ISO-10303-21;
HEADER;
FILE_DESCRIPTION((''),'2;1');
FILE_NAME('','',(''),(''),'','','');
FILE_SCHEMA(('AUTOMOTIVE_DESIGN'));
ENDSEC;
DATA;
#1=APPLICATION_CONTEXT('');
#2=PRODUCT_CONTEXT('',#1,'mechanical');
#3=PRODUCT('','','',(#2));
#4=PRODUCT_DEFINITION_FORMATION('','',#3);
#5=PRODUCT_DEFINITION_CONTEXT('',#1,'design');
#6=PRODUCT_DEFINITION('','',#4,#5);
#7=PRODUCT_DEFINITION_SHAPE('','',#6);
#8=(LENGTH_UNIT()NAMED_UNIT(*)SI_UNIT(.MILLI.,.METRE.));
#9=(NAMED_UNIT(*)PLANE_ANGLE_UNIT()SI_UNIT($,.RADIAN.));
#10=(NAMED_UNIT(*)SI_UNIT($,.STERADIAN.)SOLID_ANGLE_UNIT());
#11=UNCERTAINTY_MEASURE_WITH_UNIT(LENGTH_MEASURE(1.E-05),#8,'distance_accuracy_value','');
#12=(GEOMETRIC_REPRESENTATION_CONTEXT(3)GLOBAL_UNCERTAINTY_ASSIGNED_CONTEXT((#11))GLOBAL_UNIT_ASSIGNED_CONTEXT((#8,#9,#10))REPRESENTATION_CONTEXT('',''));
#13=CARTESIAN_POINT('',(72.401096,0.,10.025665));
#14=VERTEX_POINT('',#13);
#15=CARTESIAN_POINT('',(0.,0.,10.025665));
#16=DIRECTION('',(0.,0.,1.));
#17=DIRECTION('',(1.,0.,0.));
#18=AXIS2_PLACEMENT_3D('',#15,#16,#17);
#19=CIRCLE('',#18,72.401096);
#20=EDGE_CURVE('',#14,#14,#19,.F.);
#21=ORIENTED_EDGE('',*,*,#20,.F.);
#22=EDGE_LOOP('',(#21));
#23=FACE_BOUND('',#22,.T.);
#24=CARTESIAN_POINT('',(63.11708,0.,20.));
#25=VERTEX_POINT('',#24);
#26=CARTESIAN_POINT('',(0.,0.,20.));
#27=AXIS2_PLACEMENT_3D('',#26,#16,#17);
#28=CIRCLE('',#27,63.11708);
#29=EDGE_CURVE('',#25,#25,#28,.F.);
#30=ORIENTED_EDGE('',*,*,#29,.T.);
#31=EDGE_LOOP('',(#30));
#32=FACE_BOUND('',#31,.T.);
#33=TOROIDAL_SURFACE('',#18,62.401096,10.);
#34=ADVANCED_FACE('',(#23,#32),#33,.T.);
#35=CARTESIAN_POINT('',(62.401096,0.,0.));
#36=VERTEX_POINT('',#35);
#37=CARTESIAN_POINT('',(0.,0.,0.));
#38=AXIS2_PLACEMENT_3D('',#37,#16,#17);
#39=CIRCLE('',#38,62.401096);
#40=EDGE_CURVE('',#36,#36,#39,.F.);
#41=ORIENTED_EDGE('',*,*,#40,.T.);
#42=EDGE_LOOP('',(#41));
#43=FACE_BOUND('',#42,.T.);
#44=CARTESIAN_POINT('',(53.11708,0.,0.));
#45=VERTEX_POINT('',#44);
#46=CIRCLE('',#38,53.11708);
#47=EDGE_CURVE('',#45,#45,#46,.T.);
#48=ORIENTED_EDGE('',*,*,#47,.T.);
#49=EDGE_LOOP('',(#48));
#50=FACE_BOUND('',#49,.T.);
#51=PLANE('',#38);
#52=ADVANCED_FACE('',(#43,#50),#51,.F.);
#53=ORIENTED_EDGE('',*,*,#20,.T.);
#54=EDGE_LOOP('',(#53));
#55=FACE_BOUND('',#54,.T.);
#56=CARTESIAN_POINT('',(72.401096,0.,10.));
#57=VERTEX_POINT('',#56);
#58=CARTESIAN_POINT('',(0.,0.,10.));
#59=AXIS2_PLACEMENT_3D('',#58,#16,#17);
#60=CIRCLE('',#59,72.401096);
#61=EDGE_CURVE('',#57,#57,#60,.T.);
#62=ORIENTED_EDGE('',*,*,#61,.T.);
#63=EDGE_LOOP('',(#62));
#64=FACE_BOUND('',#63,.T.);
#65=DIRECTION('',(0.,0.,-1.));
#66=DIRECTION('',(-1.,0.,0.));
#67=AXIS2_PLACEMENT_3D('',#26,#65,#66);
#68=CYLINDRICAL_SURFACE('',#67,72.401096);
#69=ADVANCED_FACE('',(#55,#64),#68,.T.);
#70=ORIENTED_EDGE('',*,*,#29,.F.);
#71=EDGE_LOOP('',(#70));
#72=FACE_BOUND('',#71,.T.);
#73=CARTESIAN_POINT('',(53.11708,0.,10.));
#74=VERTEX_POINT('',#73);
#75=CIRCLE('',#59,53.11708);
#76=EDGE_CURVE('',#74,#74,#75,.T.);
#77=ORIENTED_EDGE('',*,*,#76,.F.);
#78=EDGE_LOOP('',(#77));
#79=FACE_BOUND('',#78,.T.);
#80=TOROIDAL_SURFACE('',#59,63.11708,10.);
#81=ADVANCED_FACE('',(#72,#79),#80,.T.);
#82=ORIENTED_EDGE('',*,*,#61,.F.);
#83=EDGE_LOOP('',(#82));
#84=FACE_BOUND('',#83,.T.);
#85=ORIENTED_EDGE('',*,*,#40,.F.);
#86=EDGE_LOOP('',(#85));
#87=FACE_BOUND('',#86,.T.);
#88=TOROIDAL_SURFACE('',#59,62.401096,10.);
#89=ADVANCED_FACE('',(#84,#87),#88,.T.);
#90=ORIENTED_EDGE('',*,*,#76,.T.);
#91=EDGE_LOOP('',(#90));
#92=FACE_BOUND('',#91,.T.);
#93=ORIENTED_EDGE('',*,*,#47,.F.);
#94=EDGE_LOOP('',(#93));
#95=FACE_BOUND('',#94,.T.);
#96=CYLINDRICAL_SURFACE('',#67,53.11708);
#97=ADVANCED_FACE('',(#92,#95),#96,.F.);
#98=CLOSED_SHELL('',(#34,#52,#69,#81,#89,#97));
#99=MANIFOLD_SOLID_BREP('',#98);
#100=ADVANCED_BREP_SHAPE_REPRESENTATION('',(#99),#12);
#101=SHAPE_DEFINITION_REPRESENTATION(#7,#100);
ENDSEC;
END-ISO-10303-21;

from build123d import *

# Parameters (mm, degrees)
SKETCH1_R           = 72.401096357
SKETCH1_R_2         = 53.117079775
BOSS_EXTRUDE1_DEPTH = 20
FILLET8_R           = 10
FILLET9_R           = 10
FILLET10_R          = 10


with BuildPart() as part:
    # Sketch1 → Boss-Extrude1 (new body)
    with BuildSketch(Plane.XY):
        Circle(SKETCH1_R)
        Circle(SKETCH1_R_2, mode=Mode.SUBTRACT)
    extrude(amount=BOSS_EXTRUDE1_DEPTH)

    # Fillet8
    fillet8_edges = [part.edges().sort_by_distance(p)[0] for p in [
        (-53.117079775, 0, 20),
    ]]
    fillet(fillet8_edges, radius=FILLET8_R)

    # Fillet9
    # the kernel refuses this fillet: 10 mm, written as the material it takes off along each edge
    with BuildSketch(Plane(origin=(0, 0, 20), x_dir=(1, 0, 0), z_dir=(0, -1, 0))) as fillet9_piece_1:
        with BuildLine():
            CenterArc((62.401096357, -9.974335454), FILLET9_R, 0, 85.894204151)
            Line((72.401096357, -9.974335454), (72.601096357, -9.974335454))
            Line((72.601096357, -9.974335454), (72.601096357, 0))
            Line((72.601096357, 0), (72.401096357, 0.2))
            ThreePointArc((72.401096357, 0.2), (67.759088066, 0.2), (63.131399443, 0.199486709))
            Line((63.131399443, 0.199486709), (63.117079775, 0))
        make_face()
    revolve(axis=Axis((0, 0, 20), (0, 0, 1)), mode=Mode.SUBTRACT)

    # Fillet10
    fillet10_edges = [part.edges().sort_by_distance(p)[0] for p in [
        (-72.401096357, 0, 0),
    ]]
    fillet(fillet10_edges, radius=FILLET10_R)


solid = part.part
